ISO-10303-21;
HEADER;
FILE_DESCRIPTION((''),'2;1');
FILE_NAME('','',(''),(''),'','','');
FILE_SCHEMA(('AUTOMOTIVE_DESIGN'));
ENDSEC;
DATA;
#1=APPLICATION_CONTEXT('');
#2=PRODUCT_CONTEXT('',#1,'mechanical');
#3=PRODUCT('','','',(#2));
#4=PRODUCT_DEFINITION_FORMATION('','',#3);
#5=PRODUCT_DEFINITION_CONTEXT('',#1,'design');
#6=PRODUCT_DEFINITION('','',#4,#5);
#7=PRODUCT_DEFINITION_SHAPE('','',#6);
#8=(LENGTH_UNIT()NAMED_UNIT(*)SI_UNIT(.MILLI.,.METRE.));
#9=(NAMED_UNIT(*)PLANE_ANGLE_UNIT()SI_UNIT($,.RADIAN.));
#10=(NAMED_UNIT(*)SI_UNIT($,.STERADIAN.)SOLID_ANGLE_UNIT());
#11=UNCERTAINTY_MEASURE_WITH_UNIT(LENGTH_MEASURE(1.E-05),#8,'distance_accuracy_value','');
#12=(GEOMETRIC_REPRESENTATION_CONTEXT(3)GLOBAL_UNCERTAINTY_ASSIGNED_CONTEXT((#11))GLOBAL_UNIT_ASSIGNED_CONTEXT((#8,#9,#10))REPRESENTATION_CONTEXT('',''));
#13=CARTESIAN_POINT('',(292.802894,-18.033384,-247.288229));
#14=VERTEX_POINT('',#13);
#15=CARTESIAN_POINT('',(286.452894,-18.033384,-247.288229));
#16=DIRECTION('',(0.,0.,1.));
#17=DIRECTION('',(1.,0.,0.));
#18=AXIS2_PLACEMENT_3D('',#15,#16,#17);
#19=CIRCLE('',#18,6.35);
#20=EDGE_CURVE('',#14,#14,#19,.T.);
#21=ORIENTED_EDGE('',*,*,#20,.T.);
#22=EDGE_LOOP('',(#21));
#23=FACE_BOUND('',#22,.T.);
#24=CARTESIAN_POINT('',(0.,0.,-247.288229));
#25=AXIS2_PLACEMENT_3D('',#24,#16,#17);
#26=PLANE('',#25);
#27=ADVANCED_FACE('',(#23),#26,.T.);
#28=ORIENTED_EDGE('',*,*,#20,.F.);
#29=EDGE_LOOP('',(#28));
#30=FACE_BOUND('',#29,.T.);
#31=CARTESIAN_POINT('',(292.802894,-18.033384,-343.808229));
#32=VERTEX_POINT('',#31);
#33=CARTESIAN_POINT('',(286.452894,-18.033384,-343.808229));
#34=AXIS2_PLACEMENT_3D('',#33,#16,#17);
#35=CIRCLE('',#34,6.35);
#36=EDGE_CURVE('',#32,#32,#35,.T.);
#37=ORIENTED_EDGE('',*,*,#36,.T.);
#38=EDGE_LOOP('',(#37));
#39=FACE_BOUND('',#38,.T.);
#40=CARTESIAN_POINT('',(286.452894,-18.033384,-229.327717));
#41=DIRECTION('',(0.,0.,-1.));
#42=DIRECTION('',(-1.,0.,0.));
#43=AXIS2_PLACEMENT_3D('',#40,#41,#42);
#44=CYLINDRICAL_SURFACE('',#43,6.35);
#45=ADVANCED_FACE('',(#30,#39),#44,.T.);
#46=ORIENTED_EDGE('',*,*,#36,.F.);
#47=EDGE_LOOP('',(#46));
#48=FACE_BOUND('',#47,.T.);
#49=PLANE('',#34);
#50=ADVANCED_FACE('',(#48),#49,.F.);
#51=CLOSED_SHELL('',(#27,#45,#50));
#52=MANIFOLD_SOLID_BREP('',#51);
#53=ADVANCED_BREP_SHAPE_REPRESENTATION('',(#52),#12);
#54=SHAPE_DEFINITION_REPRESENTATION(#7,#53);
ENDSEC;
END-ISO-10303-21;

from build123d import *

# Parameters (mm, degrees)
BOSS_EXTRUDE1_OUTLINE_R = 6.35
BOSS_EXTRUDE1_DEPTH     = 96.52


# Read off the part's stored shape, not the designer's step: Boss-Extrude1
with BuildPart() as part:
    # Boss-Extrude1 outline → Boss-Extrude1 (new body)
    with BuildSketch(Plane.XY.offset(-343.808229346)):
        with Locations((286.452894146, -18.033383804)):
            Circle(BOSS_EXTRUDE1_OUTLINE_R)
    extrude(amount=BOSS_EXTRUDE1_DEPTH)


solid = part.part
